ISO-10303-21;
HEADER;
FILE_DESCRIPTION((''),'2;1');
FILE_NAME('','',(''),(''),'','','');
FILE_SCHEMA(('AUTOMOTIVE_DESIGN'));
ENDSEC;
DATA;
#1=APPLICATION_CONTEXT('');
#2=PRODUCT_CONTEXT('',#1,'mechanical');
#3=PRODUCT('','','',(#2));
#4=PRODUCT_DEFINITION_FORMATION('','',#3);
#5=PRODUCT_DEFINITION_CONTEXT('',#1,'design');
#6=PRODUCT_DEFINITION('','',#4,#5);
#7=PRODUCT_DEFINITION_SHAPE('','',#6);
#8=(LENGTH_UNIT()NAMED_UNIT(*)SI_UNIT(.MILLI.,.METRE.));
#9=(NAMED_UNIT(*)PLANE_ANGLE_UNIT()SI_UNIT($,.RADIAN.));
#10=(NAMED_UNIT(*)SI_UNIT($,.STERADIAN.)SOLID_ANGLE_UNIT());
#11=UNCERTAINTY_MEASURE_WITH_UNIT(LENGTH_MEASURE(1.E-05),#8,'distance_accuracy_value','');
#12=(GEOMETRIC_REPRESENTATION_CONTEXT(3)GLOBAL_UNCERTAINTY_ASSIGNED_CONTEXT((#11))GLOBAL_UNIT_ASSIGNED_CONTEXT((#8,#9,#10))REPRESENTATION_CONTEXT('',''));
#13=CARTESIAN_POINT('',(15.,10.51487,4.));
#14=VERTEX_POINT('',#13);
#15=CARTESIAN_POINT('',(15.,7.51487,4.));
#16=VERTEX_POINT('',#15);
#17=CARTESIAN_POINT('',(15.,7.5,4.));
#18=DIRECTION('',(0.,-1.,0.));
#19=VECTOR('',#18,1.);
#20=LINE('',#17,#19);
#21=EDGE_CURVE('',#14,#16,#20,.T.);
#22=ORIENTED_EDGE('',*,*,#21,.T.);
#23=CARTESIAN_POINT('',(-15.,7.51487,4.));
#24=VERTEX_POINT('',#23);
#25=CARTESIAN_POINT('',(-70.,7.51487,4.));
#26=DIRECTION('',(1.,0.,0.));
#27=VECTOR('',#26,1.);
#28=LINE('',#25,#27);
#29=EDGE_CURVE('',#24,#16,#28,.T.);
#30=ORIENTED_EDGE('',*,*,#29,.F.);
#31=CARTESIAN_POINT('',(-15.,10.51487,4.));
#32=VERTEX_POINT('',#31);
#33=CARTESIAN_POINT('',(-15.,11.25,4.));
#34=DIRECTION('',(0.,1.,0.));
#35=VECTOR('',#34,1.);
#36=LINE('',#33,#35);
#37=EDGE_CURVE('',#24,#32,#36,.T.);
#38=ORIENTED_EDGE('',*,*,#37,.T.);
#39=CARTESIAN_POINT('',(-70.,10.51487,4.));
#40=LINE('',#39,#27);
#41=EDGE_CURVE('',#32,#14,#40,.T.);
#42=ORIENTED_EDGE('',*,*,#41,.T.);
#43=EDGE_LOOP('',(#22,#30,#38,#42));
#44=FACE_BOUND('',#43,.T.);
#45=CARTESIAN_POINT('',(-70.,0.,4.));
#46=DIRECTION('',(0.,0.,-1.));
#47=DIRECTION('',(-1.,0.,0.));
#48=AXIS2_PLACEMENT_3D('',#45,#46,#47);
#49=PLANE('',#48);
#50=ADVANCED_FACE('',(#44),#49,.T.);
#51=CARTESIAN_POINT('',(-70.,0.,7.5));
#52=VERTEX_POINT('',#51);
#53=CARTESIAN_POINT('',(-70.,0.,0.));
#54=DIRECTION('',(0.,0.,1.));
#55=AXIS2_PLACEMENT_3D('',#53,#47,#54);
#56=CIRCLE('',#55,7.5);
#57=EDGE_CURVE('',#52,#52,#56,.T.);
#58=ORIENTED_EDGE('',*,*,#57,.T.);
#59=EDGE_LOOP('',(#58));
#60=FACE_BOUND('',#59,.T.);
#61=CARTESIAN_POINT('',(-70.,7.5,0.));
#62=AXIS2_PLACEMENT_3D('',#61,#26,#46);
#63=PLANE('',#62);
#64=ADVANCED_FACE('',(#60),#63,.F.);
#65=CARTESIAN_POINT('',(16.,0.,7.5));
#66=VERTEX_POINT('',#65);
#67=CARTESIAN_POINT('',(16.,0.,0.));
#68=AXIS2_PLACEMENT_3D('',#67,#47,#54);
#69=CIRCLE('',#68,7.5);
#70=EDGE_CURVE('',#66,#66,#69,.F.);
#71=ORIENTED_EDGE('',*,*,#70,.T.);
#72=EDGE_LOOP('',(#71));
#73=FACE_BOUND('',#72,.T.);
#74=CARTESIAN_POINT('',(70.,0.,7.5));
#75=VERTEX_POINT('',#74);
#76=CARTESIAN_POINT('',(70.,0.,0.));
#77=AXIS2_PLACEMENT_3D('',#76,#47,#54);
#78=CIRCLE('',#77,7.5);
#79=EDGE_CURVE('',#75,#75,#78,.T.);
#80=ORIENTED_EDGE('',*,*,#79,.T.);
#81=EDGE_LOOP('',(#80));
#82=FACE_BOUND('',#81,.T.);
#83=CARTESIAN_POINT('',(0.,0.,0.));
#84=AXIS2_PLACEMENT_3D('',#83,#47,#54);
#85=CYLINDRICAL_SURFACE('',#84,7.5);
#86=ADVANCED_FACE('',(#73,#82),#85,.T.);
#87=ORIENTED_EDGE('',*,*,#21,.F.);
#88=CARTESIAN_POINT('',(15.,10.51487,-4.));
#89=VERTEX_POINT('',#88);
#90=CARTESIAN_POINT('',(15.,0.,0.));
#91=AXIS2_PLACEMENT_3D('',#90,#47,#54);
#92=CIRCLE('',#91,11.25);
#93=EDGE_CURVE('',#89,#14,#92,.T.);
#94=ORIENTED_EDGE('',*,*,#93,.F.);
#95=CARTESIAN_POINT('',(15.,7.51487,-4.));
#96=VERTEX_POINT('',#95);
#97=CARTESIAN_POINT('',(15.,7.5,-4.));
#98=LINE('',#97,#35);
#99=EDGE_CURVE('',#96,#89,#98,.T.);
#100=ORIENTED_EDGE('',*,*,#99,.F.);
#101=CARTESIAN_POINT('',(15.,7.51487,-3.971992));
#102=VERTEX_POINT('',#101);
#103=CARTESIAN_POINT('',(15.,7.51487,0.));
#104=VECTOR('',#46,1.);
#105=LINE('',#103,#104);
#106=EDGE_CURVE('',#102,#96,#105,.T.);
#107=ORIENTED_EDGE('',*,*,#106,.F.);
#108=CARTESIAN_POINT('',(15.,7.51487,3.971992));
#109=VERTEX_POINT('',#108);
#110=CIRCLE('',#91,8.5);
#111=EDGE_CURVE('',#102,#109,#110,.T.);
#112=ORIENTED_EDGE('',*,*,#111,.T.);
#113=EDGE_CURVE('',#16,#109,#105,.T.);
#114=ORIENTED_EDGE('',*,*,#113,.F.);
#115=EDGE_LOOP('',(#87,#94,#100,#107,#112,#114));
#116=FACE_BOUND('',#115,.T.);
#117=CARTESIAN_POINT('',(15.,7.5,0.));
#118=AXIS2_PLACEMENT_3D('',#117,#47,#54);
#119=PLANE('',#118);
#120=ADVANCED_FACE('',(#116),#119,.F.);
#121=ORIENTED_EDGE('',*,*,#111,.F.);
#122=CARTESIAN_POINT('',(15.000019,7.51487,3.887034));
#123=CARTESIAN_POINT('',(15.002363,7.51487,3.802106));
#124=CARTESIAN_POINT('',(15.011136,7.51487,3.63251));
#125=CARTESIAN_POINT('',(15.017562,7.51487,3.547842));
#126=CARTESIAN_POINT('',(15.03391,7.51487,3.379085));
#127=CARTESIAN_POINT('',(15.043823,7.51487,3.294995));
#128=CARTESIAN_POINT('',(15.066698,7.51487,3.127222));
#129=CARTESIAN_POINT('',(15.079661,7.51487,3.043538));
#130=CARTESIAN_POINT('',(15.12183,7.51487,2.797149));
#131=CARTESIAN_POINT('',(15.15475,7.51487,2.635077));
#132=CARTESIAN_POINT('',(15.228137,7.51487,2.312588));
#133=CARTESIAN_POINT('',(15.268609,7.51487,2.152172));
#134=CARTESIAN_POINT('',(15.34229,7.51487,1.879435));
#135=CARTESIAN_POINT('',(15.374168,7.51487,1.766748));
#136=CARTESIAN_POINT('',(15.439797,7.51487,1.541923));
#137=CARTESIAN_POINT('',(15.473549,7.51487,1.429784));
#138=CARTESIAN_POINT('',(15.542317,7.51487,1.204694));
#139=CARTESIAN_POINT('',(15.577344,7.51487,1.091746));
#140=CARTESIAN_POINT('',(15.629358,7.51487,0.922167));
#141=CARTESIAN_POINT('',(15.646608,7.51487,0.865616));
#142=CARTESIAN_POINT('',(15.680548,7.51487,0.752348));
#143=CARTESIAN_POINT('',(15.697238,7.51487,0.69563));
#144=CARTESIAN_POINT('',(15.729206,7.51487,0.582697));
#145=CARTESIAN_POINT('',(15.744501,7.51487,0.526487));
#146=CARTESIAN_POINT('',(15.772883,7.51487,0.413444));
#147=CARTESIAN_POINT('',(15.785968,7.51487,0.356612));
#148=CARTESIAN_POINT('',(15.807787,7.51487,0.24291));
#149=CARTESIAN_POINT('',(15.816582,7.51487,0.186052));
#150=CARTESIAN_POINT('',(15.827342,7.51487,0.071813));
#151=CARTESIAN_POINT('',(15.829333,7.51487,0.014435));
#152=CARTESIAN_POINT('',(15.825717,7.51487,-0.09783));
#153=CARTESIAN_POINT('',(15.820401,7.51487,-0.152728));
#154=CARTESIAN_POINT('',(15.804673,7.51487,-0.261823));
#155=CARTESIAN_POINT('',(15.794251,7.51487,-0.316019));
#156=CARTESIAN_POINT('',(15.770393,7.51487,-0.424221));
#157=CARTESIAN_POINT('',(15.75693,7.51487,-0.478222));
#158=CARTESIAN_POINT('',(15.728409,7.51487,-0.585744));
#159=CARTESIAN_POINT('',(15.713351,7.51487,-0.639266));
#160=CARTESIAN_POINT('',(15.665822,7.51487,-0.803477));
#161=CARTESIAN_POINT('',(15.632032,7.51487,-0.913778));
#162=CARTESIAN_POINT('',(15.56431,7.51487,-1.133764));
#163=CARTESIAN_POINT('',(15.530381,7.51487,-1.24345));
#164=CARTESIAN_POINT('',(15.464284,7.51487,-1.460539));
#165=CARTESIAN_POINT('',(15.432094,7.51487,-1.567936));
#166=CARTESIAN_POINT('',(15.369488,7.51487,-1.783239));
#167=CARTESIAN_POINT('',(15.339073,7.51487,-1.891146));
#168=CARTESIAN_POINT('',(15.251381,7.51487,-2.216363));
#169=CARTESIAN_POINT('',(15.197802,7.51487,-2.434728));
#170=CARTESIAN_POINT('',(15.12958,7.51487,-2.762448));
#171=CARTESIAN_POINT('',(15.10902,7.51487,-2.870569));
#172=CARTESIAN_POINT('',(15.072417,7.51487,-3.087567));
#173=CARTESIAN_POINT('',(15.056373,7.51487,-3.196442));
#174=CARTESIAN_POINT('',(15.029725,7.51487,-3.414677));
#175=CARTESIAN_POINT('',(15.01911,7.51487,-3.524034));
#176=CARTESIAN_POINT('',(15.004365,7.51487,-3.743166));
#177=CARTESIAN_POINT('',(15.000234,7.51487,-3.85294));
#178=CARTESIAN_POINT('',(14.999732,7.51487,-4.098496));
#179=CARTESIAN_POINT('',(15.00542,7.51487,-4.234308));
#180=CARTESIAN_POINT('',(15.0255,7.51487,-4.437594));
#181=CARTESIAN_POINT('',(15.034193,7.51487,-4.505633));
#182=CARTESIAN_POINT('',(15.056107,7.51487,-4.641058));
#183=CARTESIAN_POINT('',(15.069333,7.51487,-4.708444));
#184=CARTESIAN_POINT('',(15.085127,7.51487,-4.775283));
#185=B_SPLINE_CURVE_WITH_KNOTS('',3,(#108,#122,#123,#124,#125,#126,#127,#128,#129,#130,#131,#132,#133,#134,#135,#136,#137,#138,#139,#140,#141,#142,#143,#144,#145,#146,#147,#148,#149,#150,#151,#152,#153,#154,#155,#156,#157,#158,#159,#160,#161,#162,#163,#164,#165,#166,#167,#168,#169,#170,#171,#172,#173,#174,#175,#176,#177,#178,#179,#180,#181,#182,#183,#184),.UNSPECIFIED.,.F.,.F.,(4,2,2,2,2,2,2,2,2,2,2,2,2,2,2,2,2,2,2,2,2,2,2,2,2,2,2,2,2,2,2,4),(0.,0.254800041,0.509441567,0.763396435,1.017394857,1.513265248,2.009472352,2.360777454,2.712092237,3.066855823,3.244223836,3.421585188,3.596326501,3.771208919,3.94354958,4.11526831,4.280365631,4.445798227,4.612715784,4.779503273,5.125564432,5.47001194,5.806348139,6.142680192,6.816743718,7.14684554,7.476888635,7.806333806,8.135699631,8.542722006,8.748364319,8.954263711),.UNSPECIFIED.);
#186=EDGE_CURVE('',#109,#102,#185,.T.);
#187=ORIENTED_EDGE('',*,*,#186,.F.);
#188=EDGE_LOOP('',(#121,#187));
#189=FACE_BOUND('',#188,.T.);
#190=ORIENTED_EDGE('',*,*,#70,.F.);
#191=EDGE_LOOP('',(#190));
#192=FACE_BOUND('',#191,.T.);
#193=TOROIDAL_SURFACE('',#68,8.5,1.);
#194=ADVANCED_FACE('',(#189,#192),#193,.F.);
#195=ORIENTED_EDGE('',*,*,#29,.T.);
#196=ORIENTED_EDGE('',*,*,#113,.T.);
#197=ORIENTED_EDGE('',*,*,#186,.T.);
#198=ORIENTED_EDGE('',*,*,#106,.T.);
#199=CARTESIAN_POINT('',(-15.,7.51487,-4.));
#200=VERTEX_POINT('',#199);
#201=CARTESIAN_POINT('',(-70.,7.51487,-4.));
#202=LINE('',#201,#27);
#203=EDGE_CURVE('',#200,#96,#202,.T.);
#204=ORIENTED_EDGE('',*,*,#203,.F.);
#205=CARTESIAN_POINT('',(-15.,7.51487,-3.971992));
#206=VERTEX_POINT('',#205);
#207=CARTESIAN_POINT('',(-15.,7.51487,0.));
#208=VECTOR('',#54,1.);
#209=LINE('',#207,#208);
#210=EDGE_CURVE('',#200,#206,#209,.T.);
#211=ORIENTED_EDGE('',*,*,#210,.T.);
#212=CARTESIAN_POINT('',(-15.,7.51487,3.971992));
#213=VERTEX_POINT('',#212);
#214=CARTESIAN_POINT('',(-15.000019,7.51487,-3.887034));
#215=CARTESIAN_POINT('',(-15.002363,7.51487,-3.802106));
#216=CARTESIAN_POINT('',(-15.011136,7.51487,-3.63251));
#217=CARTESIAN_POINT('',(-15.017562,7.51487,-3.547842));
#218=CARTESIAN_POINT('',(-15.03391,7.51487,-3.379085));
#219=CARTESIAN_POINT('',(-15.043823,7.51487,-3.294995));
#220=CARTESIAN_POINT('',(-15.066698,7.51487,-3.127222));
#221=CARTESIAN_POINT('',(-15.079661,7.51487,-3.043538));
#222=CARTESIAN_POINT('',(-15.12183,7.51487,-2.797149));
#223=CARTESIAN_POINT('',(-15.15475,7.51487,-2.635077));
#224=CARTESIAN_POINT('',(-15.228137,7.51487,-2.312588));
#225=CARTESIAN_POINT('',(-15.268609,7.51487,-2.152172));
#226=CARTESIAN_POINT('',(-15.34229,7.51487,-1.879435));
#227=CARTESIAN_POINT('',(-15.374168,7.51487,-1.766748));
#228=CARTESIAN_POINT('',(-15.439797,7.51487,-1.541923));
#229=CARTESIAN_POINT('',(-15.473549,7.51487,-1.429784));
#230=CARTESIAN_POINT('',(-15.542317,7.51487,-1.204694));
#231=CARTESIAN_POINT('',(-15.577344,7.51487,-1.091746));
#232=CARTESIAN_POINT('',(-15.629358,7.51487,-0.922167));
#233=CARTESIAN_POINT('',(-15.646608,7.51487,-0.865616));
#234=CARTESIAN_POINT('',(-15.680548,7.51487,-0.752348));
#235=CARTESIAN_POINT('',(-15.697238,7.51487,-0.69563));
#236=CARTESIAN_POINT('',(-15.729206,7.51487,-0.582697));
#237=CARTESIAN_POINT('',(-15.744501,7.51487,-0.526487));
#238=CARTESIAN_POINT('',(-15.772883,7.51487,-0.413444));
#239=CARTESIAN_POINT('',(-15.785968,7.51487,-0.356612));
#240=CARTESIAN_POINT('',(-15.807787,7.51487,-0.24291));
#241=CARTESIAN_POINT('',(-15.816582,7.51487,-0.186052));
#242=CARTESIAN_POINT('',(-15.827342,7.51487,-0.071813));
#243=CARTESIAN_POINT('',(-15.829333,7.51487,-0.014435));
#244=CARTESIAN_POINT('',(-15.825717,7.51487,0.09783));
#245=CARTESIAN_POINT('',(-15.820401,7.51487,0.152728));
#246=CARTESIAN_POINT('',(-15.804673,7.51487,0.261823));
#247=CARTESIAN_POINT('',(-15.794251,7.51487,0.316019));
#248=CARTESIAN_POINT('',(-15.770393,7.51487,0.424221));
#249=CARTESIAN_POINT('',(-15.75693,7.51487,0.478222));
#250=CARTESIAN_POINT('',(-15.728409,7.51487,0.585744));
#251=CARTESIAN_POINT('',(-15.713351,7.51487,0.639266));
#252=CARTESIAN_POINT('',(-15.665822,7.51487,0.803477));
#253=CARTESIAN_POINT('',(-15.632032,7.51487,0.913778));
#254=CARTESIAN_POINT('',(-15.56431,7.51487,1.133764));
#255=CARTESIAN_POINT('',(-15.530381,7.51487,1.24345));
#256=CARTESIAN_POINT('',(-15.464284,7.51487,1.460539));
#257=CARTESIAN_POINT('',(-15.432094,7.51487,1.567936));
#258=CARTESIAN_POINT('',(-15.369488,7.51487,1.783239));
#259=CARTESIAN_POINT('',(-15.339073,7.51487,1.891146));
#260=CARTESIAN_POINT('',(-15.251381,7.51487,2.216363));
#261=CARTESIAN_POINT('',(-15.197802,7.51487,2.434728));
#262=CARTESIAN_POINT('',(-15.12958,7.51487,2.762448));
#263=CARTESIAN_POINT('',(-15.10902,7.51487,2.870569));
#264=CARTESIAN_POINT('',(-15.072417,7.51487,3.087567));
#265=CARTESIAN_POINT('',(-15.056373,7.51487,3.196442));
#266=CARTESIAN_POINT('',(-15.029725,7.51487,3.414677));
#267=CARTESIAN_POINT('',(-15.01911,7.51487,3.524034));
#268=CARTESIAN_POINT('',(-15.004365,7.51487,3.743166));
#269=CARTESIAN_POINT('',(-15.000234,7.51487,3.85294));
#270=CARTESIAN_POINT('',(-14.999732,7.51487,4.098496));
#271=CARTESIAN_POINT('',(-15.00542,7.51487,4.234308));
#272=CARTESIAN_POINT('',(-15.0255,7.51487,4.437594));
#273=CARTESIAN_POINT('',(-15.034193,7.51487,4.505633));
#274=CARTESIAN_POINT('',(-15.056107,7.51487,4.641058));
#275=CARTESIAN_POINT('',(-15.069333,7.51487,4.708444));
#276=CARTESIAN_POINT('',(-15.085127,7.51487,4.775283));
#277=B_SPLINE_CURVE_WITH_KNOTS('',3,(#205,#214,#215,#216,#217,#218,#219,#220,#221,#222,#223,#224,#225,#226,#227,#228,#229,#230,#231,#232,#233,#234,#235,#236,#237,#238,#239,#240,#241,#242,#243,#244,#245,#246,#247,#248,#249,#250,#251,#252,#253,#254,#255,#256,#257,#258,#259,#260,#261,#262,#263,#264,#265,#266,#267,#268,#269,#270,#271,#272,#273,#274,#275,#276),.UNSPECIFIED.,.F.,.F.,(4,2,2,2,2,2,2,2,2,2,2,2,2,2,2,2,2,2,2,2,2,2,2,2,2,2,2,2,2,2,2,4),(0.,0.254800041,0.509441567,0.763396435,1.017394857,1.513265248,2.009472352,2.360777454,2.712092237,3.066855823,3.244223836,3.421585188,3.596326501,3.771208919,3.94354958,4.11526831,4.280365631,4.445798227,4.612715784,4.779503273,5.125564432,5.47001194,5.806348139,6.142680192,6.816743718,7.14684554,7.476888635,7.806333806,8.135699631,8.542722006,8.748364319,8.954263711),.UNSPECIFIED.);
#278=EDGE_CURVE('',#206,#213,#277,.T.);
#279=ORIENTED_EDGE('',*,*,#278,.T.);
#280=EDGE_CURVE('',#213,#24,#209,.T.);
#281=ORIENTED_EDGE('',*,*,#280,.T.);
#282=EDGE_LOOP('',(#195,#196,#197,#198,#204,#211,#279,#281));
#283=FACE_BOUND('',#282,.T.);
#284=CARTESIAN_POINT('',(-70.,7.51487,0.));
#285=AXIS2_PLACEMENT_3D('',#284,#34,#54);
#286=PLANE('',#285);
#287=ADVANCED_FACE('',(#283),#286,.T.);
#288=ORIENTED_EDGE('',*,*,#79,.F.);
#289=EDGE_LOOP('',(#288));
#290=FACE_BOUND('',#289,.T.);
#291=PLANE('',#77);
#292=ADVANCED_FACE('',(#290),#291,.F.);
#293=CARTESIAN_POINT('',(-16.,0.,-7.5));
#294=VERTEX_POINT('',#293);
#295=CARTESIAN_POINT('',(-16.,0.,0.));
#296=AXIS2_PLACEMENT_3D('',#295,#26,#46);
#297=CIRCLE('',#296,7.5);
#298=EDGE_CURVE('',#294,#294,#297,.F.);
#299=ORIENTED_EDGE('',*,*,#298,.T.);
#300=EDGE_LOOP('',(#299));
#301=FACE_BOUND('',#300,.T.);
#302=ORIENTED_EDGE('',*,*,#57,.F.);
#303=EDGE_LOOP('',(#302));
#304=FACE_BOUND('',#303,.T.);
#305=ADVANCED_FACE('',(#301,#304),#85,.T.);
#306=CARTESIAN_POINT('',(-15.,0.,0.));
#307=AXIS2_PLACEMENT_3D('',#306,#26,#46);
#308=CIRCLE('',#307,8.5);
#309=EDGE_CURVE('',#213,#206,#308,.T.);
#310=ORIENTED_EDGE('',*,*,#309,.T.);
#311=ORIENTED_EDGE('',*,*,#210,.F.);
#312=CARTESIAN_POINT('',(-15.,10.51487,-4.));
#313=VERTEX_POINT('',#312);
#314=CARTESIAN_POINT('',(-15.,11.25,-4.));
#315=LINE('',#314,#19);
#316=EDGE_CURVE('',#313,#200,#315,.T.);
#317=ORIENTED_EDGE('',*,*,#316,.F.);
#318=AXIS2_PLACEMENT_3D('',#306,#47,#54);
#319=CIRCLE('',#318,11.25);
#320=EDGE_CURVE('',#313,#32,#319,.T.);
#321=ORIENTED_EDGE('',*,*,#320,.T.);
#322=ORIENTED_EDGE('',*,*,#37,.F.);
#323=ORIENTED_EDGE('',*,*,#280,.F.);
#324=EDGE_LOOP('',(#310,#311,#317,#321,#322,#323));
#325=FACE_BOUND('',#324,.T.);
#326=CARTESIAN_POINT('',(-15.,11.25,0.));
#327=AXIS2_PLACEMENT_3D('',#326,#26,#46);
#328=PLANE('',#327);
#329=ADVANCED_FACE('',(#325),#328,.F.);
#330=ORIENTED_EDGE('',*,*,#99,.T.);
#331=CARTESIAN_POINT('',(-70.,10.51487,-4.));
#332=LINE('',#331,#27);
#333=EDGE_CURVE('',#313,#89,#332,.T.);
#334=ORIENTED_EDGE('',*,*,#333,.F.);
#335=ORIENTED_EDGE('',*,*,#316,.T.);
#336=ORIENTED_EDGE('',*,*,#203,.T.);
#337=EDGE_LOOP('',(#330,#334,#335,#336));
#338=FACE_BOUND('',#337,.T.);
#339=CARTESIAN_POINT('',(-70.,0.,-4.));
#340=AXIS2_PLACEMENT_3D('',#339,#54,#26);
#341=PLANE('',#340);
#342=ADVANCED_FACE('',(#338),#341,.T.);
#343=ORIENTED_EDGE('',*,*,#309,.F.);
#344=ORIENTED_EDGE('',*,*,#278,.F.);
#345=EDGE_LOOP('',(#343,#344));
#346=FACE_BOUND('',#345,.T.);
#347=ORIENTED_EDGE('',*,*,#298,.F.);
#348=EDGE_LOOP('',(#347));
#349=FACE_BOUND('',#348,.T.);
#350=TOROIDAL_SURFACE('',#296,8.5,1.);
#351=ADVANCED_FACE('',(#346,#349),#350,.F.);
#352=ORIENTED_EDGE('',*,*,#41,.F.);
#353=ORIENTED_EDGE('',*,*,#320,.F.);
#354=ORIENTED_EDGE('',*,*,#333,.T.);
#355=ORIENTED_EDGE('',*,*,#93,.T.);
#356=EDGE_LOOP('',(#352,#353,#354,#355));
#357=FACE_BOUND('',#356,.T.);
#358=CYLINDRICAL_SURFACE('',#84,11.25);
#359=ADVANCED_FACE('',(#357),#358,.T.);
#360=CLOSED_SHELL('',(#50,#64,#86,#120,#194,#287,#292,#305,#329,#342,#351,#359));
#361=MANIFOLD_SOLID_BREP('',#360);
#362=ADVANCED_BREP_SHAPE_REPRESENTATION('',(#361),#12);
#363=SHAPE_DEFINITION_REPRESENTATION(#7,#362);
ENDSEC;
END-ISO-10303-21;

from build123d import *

# Parameters (mm, degrees)
CUT_EXTRUDE1_DEPTH      = 72.785270077
CUT_EXTRUDE1_DEPTH_BACK = 72.785270077
SKETCH4_W               = 4
SKETCH4_H               = 3
FILLET5_R               = 1
FILLET6_R               = 1


with BuildPart() as part:
    # Sketch1 → Revolve1 (revolve)
    with BuildSketch(Plane.XY, mode=Mode.PRIVATE) as revolve1_sk:
        Polygon((0, 0), (70, 0), (70, 7.5), (15, 7.5), (15, 11.25), (-15, 11.25), (-15, 7.5), (-70, 7.5), (-70, 0), align=None)
    revolve(revolve1_sk.sketch.rotate(Axis((0, 0, 0), (1, 0, 0)), 90), axis=Axis((0, 0, 0), (1, 0, 0)))

    # Sketch4 → Cut-Extrude1 (cut, two sides: drawn at the far end of the back side and taken through both)
    with BuildSketch(Plane(origin=(0, 0, 0), x_dir=(0, 0, -1), z_dir=(1, 0, 0)).offset(-CUT_EXTRUDE1_DEPTH_BACK)):
        with Locations((2, 9.014870422)):
            Rectangle(SKETCH4_W, SKETCH4_H)
        with Locations((-2, 9.014870422)):
            Rectangle(SKETCH4_W, SKETCH4_H)
        with BuildLine():
            Line((0, 11.25), (0, 10.514870422))
            Line((0, 10.514870422), (4, 10.514870422))
            ThreePointArc((4, 10.514870422), (2.033495482, 11.064691416), (0, 11.25))
        make_face()
        with BuildLine():
            Line((-4, 10.514870422), (0, 10.514870422))
            Line((0, 10.514870422), (0, 11.25))
            ThreePointArc((0, 11.25), (-2.033495482, 11.064691416), (-4, 10.514870422))
        make_face()
    extrude(amount=CUT_EXTRUDE1_DEPTH + CUT_EXTRUDE1_DEPTH_BACK, mode=Mode.SUBTRACT)

    # Fillet5
    # the kernel refuses this fillet: 1 mm, written as the material it adds along each edge
    with BuildSketch(Plane(origin=(-15, 0, 0), x_dir=(0, 0, 1), z_dir=(0, 1, 0))) as fillet5_piece_1_section:
        with BuildLine():
            CenterArc((7.5 + FILLET5_R, -FILLET5_R), FILLET5_R, 90, 90)
            Line((7.5, -FILLET5_R), (7.5, 0))
            Line((7.5, 0), (7.5 + FILLET5_R, 0))
        make_face()
    fillet5_piece_1 = revolve(axis=Axis((-15, 0, 0), (1, 0, 0)), mode=Mode.PRIVATE)
    fillet5_piece_1 = split(fillet5_piece_1, bisect_by=Plane(origin=(-15.276890307, 7.514870422, -7.776890307), z_dir=(0, -1, 0)), keep=Keep.TOP, mode=Mode.PRIVATE)
    add(fillet5_piece_1)

    # Fillet6
    # the kernel refuses this fillet: 1 mm, written as the material it adds along each edge
    with BuildSketch(Plane(origin=(15, 0, 0), x_dir=(0, 0, 1), z_dir=(0, 1, 0))) as fillet6_piece_1_section:
        with BuildLine():
            CenterArc((7.5 + FILLET6_R, FILLET6_R), FILLET6_R, 180, 90)
            Line((7.5, FILLET6_R), (7.5, 0))
            Line((7.5, 0), (7.5 + FILLET6_R, 0))
        make_face()
    fillet6_piece_1 = revolve(axis=Axis((15, 0, 0), (1, 0, 0)), mode=Mode.PRIVATE)
    fillet6_piece_1 = split(fillet6_piece_1, bisect_by=Plane(origin=(15.276890307, 7.514870422, -7.776890307), z_dir=(0, -1, 0)), keep=Keep.TOP, mode=Mode.PRIVATE)
    add(fillet6_piece_1)


solid = part.part
